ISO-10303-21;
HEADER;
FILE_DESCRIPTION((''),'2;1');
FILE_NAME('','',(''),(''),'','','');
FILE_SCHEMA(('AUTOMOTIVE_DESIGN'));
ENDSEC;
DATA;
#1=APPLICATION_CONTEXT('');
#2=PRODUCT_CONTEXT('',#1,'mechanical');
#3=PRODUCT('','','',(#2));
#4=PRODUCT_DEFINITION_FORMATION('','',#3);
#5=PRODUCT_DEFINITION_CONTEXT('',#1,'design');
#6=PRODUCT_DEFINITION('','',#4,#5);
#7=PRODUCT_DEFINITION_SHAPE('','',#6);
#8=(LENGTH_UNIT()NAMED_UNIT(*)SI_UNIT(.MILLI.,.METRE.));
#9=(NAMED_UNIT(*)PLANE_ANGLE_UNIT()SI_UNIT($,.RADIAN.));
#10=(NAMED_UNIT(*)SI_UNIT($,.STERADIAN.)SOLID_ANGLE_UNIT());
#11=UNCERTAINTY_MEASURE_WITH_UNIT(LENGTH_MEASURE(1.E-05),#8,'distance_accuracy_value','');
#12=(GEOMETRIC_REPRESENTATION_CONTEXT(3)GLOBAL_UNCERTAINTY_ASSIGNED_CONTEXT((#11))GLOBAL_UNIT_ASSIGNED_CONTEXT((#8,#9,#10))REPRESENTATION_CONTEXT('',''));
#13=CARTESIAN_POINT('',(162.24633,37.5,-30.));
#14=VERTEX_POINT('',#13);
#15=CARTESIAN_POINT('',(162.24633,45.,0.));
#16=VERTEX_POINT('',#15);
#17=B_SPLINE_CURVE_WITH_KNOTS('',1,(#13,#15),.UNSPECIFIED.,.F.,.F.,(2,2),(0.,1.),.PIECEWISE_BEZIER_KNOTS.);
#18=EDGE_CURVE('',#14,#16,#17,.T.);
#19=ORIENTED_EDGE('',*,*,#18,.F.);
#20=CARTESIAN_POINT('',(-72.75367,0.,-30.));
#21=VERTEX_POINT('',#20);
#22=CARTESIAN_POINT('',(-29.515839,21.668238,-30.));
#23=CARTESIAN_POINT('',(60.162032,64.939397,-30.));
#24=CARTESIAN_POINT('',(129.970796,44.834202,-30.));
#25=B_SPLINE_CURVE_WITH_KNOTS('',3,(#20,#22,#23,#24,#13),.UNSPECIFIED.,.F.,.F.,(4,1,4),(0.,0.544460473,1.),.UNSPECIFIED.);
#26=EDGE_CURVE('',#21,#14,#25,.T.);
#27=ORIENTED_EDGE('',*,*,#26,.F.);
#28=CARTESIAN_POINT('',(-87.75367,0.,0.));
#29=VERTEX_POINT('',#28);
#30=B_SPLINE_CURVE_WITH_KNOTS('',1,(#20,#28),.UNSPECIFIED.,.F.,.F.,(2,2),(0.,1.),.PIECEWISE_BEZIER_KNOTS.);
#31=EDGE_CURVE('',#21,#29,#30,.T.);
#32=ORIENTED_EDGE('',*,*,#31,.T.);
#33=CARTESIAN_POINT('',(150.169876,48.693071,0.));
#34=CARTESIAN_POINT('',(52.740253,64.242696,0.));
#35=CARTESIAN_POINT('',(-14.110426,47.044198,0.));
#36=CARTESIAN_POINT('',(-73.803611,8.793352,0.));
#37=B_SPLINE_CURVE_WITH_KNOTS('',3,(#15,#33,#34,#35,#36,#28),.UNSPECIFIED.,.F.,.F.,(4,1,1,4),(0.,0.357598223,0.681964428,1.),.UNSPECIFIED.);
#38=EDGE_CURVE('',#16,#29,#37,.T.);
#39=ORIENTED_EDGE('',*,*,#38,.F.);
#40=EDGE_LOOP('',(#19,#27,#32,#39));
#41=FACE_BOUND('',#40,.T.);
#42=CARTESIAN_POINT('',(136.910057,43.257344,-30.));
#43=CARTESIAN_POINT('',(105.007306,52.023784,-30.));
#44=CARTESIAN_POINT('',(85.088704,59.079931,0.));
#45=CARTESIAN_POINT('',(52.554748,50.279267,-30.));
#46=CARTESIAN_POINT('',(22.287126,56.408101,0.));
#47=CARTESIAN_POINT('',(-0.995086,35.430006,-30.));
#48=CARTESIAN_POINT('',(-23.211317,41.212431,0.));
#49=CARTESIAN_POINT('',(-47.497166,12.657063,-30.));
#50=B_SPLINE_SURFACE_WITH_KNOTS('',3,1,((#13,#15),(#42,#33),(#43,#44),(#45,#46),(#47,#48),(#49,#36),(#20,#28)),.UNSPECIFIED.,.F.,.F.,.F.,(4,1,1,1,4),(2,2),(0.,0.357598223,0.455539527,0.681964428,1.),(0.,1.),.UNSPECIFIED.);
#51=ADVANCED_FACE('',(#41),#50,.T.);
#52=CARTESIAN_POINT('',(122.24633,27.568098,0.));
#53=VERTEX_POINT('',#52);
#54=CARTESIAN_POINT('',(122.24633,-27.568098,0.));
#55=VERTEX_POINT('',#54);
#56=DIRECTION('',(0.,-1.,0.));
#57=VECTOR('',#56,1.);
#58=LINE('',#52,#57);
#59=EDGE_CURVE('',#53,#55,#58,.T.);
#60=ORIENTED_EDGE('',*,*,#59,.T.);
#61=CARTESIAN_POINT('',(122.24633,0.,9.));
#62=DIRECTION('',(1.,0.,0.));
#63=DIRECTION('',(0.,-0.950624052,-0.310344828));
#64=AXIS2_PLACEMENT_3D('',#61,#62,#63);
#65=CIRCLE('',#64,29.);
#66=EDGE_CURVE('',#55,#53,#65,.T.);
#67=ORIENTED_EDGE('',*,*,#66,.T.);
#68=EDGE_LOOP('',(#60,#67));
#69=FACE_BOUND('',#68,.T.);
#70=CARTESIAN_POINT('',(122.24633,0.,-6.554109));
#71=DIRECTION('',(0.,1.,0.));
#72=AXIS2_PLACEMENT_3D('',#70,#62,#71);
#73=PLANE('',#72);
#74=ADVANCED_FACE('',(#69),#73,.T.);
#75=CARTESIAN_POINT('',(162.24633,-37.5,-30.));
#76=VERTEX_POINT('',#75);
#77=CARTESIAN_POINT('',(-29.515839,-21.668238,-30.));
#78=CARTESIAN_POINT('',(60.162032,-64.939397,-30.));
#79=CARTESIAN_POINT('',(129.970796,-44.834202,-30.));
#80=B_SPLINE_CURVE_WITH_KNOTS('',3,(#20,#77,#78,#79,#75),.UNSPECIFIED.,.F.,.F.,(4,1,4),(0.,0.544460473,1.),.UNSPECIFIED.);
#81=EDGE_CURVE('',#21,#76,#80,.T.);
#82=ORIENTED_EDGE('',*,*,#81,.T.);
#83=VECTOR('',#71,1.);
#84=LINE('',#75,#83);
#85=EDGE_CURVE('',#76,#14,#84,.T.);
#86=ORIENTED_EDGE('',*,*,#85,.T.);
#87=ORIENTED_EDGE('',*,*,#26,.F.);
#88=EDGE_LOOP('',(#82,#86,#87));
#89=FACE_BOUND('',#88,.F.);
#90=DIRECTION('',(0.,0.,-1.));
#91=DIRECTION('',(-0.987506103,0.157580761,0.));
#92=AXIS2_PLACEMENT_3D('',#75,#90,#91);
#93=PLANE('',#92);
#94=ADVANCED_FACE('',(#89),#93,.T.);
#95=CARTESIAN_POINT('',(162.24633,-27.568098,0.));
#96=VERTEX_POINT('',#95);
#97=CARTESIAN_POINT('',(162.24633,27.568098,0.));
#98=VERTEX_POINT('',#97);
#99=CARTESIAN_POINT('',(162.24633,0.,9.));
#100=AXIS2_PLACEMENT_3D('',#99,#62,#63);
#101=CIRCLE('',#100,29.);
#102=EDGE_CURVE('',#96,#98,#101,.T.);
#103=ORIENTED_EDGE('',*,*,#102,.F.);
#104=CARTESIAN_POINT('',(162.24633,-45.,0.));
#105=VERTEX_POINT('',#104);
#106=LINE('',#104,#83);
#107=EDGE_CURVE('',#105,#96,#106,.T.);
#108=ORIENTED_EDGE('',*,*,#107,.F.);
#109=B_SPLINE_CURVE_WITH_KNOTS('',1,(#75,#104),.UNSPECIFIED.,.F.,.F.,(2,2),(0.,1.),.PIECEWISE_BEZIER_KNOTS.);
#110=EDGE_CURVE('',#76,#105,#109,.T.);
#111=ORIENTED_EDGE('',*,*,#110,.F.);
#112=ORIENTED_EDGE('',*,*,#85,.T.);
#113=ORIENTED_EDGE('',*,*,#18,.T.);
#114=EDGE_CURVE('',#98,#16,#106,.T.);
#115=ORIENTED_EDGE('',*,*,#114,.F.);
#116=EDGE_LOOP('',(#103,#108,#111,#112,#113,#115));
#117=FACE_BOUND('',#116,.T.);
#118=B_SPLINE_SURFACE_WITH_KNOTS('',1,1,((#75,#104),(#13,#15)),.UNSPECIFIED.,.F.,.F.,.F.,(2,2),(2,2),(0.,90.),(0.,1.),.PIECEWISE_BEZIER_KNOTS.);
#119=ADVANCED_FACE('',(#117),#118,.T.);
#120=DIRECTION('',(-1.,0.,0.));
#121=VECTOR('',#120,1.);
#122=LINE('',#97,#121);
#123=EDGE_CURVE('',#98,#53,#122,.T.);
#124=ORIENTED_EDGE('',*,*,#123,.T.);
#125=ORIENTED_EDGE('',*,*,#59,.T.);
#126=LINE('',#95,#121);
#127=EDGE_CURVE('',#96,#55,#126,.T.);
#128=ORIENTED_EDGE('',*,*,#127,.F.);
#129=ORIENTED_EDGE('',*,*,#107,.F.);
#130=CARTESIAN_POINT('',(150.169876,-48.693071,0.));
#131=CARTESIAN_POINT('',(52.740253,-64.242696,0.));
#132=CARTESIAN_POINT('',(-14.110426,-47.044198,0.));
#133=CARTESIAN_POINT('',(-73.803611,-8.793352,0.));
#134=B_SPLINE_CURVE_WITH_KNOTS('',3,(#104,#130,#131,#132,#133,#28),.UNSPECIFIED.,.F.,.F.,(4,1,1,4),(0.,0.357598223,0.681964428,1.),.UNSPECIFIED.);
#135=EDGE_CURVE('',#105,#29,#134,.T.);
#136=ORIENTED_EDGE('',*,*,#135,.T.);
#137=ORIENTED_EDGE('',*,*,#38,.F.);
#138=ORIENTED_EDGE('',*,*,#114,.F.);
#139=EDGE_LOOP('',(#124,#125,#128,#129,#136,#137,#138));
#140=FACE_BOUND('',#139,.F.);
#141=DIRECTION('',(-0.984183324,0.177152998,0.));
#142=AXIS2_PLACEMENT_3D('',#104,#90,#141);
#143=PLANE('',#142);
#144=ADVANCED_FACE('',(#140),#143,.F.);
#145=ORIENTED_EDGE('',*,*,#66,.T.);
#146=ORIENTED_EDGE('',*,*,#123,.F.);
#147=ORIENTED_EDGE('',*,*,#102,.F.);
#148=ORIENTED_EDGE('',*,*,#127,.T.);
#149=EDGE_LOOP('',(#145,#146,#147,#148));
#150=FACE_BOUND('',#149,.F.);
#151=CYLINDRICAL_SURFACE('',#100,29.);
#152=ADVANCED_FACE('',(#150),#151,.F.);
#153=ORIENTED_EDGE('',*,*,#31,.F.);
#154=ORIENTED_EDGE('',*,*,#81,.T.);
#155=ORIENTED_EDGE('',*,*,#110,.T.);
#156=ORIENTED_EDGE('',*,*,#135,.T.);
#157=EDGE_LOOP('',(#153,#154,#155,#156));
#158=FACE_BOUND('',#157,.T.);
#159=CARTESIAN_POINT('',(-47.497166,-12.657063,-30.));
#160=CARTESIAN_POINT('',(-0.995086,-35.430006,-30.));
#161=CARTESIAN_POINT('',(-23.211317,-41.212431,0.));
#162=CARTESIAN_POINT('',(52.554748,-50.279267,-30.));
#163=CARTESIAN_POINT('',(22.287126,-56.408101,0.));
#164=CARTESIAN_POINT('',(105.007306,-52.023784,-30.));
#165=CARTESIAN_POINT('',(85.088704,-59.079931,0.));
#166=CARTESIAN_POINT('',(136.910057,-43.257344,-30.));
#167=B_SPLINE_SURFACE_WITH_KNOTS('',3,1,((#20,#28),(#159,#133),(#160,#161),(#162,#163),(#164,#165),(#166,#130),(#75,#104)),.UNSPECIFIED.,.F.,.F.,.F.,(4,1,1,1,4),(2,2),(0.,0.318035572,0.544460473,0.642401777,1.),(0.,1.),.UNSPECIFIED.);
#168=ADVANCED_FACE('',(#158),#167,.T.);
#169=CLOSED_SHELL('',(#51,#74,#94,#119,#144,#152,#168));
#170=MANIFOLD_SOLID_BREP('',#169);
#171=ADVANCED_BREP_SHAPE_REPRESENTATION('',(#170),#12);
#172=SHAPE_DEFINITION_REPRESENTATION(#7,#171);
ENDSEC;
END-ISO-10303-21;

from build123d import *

# Parameters (mm, degrees)
F5_DEPTH = 40


with BuildPart() as f3:
    # F2 (on offset) → F3 section 0
    with BuildSketch(Plane.XY.offset(-30)):
        with BuildLine():
            Line((162.2463304921, -37.5), (162.2463304921, 0))
            Line((162.2463304921, 0), (162.2463304921, 37.5))
            add(Edge.make_bspline(
                [(-72.7536695079, 0), (-29.5158392356, 21.6682380863), (60.1620321507, 64.9393967263), (129.9707958681, 44.834202262), (162.2463304921, 37.5)],
                knots=[0, 0, 0, 0, 0.5444604727, 1, 1, 1, 1], degree=3))
            add(Edge.make_bspline(
                [(-72.7536695079, 0), (-29.5158392356, -21.6682380863), (60.1620321507, -64.9393967263), (129.9707958681, -44.834202262), (162.2463304921, -37.5)],
                knots=[0, 0, 0, 0, 0.5444604727, 1, 1, 1, 1], degree=3))
        make_face()
    # F0 (on Top) → F3 section 1
    with BuildSketch(Plane.XY):
        with BuildLine():
            Line((162.2463304921, -45), (162.2463304921, 0))
            Line((162.2463304921, 0), (162.2463304921, 45))
            add(Edge.make_bspline(
                [(162.2463304921, 45), (150.1698760976, 48.6930710105), (52.7402528222, 64.2426959064), (-14.1104264901, 47.0441984602), (-73.803611279, 8.7933518628), (-87.7536695079, 0)],
                knots=[0, 0, 0, 0, 0.3575982232, 0.6819644283, 1, 1, 1, 1], degree=3))
            add(Edge.make_bspline(
                [(162.2463304921, -45), (150.1698760976, -48.6930710105), (52.7402528222, -64.2426959064), (-14.1104264901, -47.0441984602), (-73.803611279, -8.7933518628), (-87.7536695079, 0)],
                knots=[0, 0, 0, 0, 0.3575982232, 0.6819644283, 1, 1, 1, 1], degree=3))
        make_face()
    loft()

    # F4 (on face) → F5 (cut)
    with BuildSketch(Plane.YZ.offset(162.2463304921)):
        with BuildLine():
            Line((27.5680975042, 0), (-27.5680975042, 0))
            ThreePointArc((-27.5680975042, 0), (0, -20), (27.5680975042, 0))
        make_face()
    extrude(amount=-F5_DEPTH, mode=Mode.SUBTRACT)


solid = f3.part
